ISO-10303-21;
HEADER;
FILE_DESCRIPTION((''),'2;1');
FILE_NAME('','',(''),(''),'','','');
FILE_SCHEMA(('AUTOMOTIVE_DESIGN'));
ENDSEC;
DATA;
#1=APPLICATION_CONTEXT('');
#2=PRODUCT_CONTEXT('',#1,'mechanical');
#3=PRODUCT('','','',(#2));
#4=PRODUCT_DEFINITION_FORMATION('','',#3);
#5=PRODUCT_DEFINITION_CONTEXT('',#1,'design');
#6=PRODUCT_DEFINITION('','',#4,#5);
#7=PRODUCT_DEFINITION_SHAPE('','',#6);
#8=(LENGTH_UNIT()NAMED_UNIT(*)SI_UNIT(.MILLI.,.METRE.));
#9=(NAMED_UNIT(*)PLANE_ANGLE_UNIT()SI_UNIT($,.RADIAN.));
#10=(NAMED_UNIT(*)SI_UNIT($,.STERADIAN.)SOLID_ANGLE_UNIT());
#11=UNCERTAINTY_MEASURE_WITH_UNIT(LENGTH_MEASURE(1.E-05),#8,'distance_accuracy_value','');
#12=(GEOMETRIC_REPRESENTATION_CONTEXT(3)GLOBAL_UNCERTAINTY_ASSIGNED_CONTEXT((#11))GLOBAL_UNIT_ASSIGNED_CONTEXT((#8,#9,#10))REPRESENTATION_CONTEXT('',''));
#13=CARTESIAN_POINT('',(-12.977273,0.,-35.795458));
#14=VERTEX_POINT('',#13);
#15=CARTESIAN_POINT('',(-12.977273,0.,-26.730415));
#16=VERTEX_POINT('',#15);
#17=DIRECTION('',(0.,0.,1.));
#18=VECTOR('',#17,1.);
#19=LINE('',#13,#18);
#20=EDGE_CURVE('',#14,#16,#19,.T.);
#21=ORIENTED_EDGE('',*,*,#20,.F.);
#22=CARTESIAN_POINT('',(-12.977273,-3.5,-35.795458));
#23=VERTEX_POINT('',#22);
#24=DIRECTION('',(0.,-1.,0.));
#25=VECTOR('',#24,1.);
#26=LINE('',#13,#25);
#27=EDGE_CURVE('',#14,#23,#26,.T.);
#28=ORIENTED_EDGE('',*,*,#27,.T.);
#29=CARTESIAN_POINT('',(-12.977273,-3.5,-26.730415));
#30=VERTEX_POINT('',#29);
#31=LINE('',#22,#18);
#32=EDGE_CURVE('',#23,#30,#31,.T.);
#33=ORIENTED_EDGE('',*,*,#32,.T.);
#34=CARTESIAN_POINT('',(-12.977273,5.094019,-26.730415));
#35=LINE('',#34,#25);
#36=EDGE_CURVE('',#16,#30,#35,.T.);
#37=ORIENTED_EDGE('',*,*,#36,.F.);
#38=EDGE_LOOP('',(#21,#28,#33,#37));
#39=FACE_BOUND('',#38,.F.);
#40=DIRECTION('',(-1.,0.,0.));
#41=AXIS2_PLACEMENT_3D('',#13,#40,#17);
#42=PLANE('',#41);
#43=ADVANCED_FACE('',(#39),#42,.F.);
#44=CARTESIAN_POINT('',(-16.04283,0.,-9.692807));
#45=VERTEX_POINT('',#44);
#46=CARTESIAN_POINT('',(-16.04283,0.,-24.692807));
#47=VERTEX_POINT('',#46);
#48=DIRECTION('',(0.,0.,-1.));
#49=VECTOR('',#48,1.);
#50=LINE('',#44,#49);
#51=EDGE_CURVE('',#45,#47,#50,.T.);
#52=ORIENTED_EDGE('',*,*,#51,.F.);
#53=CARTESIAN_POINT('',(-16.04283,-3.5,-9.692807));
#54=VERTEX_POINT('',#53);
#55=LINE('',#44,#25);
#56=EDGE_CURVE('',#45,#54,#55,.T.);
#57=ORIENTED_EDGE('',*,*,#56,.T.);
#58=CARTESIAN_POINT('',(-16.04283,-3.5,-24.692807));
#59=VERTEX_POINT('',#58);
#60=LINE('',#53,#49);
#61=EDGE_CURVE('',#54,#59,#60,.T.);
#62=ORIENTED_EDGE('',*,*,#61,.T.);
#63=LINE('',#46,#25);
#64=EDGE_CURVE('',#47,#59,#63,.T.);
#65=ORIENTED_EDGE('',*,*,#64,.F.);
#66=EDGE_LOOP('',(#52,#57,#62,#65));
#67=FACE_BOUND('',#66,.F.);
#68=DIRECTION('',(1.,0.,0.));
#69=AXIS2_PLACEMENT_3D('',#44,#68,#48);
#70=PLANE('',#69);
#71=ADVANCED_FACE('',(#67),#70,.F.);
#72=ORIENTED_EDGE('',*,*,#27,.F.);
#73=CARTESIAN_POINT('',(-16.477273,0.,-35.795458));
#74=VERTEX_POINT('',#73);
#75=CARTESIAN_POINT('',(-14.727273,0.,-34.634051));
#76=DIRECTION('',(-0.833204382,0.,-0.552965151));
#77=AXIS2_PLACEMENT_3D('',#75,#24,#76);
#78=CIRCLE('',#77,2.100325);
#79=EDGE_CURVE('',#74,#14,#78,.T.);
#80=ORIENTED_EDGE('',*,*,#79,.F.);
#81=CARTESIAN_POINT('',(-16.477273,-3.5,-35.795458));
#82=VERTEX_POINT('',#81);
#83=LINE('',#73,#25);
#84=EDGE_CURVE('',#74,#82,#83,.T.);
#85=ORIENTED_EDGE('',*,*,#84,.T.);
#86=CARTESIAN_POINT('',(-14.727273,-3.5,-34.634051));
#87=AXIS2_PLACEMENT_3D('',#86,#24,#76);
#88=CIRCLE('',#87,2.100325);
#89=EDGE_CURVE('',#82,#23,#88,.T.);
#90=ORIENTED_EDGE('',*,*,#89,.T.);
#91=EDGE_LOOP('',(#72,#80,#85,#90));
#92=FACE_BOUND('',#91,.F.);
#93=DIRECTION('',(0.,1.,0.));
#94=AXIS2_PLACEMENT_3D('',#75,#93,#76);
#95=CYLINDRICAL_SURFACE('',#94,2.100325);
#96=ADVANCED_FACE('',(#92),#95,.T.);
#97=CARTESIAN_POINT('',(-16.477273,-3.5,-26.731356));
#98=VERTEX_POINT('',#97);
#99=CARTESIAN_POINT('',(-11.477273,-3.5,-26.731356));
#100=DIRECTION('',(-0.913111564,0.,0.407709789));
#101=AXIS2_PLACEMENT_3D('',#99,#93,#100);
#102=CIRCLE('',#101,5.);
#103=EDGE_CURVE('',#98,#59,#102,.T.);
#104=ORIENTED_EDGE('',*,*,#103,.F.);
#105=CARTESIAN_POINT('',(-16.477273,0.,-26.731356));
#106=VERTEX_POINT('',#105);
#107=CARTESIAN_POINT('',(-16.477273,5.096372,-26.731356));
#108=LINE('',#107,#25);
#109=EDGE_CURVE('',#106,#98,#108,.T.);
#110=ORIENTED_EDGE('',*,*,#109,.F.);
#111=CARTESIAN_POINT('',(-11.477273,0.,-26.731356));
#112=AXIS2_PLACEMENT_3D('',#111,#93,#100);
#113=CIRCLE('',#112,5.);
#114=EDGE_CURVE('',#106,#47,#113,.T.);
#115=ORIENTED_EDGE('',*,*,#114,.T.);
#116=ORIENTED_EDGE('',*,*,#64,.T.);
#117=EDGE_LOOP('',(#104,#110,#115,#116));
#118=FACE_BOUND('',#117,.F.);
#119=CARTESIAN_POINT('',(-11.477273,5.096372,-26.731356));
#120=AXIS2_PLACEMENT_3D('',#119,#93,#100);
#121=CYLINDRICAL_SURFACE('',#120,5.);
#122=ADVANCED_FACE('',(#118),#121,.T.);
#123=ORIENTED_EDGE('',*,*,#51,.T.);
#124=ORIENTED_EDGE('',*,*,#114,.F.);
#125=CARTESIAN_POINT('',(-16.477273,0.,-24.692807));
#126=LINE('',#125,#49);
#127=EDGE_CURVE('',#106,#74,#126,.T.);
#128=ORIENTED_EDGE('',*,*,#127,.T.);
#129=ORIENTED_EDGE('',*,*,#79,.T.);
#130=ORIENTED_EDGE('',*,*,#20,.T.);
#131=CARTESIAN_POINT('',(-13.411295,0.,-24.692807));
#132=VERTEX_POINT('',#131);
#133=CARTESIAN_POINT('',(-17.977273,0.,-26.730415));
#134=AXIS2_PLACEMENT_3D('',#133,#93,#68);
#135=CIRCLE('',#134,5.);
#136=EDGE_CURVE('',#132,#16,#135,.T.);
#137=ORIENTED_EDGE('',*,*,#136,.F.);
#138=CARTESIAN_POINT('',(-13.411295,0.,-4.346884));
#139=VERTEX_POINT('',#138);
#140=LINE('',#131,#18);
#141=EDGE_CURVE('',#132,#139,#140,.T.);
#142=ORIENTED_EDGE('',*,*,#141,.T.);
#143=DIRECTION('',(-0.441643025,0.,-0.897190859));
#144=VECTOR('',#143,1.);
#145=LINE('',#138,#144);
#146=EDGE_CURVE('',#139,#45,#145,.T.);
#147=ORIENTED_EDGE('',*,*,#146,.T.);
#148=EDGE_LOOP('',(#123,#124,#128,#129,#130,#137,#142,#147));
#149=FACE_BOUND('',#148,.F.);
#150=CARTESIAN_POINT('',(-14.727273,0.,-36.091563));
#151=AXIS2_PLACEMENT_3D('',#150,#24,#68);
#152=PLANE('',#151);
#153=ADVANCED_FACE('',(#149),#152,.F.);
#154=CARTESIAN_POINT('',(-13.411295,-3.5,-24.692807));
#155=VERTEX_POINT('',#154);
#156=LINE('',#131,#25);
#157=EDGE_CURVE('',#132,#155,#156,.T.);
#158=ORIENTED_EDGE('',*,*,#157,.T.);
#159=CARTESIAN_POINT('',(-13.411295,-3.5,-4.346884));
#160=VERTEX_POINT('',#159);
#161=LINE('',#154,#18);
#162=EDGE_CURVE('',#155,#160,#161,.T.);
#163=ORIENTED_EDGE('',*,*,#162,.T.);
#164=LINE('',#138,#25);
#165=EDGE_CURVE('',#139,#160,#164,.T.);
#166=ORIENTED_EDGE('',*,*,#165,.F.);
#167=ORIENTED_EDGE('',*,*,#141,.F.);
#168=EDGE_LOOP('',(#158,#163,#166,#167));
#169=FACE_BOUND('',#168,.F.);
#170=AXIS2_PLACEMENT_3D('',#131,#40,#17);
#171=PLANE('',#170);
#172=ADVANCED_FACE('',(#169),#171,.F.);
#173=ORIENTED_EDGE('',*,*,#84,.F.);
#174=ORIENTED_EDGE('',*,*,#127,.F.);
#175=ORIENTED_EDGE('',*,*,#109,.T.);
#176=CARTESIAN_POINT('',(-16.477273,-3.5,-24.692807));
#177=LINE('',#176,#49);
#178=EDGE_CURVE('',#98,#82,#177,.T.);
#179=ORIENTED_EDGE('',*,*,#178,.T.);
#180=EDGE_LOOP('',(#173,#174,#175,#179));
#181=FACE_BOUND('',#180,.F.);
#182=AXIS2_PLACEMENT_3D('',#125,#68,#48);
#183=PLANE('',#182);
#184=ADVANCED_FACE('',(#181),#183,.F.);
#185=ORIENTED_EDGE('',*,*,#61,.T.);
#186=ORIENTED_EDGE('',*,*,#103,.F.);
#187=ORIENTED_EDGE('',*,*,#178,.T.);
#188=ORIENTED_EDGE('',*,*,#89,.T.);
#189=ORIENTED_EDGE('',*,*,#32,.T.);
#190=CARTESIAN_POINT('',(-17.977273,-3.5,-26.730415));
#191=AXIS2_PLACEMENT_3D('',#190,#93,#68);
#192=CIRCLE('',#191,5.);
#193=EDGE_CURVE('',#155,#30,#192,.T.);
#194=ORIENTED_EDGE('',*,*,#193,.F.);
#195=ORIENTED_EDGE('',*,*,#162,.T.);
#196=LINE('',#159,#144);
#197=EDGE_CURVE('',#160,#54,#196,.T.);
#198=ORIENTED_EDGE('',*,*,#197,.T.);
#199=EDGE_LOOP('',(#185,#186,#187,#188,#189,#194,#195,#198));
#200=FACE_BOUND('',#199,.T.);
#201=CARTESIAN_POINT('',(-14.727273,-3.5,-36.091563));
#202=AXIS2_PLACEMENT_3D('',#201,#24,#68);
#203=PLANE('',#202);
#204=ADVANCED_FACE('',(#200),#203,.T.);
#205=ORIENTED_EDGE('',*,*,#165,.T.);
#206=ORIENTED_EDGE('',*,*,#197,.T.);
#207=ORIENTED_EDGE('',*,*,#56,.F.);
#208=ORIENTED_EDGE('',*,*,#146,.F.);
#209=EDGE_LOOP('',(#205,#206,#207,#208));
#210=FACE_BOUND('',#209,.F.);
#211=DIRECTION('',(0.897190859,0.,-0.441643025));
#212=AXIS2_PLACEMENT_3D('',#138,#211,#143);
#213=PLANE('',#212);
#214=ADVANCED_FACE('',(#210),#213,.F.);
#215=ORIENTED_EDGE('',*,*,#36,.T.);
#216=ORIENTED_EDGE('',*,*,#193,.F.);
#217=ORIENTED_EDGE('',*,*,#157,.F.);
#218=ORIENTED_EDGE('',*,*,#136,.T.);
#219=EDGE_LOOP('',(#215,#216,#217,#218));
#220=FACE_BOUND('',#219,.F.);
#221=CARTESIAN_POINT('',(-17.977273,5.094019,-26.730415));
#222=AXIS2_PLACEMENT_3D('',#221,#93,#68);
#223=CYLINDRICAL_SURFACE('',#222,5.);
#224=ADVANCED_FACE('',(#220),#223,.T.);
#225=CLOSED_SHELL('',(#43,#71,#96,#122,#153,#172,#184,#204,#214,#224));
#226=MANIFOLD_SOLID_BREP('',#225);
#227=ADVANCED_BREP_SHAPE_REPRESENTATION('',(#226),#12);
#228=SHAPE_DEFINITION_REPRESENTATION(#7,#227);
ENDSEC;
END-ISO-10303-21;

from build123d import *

# Parameters (mm, degrees)
F1_DEPTH    = 3.5
F2_T1_DEPTH = 13.6927447268
F2_T3_DEPTH = 13.6880389421


# Not quite as in the source:
# - a fillet or chamfer that OpenCascade refuses, or shapes differently, is made with other operations: its cross-section is extruded or revolved along the edge and cut away or added


with BuildPart() as f1:
    # F0 (on Front) → F1 (new body)
    with BuildSketch(Plane.XZ):
        with BuildLine():
            Line((-12.9772726037, -35.7954576612), (-16.4772726037, -35.7954576612))
            ThreePointArc((-16.4772726037, -35.7954576612), (-14.7272726037, -36.734376134), (-12.9772726037, -35.7954576612))
        make_face()
        Polygon((-16.0428304225, -9.6928073466), (-16.0428304225, -24.6928073466), (-13.4112946689, -24.6928073466), (-13.4112946689, -4.3468838558), align=None)
        Polygon((-16.4772726037, -24.6928073466), (-16.4772726037, -35.7954576612), (-12.9772726037, -35.7954576612), (-12.9772726037, -24.6928073466), (-13.4112946689, -24.6928073466), (-16.0428304225, -24.6928073466), align=None)
    extrude(amount=F1_DEPTH)

    # F2: fillet of radius 5 on 2 edges, made by hand

    # F2_s2 → F2_t1 (cut)
    with BuildSketch(Plane.XZ.offset(-5.0963723634)):
        with BuildLine():
            ThreePointArc((-16.0428304225, -24.6928073466), (-16.3674560917, -25.6891924599), (-16.4772726037, -26.7313562919))
            Line((-16.4772726037, -26.7313562919), (-16.4772726037, -24.6928073466))
            Line((-16.4772726037, -24.6928073466), (-16.0428304225, -24.6928073466))
        make_face()
    extrude(amount=F2_T1_DEPTH, mode=Mode.SUBTRACT)

    # F2_s4 → F2_t3 (cut)
    with BuildSketch(Plane.XZ.offset(-5.094019471)):
        with BuildLine():
            ThreePointArc((-12.9772726037, -26.730415135), (-13.0869817292, -25.6887553234), (-13.4112946689, -24.6928073466))
            Line((-13.4112946689, -24.6928073466), (-12.9772726037, -24.6928073466))
            Line((-12.9772726037, -24.6928073466), (-12.9772726037, -26.730415135))
        make_face()
    extrude(amount=F2_T3_DEPTH, mode=Mode.SUBTRACT)


solid = f1.part
